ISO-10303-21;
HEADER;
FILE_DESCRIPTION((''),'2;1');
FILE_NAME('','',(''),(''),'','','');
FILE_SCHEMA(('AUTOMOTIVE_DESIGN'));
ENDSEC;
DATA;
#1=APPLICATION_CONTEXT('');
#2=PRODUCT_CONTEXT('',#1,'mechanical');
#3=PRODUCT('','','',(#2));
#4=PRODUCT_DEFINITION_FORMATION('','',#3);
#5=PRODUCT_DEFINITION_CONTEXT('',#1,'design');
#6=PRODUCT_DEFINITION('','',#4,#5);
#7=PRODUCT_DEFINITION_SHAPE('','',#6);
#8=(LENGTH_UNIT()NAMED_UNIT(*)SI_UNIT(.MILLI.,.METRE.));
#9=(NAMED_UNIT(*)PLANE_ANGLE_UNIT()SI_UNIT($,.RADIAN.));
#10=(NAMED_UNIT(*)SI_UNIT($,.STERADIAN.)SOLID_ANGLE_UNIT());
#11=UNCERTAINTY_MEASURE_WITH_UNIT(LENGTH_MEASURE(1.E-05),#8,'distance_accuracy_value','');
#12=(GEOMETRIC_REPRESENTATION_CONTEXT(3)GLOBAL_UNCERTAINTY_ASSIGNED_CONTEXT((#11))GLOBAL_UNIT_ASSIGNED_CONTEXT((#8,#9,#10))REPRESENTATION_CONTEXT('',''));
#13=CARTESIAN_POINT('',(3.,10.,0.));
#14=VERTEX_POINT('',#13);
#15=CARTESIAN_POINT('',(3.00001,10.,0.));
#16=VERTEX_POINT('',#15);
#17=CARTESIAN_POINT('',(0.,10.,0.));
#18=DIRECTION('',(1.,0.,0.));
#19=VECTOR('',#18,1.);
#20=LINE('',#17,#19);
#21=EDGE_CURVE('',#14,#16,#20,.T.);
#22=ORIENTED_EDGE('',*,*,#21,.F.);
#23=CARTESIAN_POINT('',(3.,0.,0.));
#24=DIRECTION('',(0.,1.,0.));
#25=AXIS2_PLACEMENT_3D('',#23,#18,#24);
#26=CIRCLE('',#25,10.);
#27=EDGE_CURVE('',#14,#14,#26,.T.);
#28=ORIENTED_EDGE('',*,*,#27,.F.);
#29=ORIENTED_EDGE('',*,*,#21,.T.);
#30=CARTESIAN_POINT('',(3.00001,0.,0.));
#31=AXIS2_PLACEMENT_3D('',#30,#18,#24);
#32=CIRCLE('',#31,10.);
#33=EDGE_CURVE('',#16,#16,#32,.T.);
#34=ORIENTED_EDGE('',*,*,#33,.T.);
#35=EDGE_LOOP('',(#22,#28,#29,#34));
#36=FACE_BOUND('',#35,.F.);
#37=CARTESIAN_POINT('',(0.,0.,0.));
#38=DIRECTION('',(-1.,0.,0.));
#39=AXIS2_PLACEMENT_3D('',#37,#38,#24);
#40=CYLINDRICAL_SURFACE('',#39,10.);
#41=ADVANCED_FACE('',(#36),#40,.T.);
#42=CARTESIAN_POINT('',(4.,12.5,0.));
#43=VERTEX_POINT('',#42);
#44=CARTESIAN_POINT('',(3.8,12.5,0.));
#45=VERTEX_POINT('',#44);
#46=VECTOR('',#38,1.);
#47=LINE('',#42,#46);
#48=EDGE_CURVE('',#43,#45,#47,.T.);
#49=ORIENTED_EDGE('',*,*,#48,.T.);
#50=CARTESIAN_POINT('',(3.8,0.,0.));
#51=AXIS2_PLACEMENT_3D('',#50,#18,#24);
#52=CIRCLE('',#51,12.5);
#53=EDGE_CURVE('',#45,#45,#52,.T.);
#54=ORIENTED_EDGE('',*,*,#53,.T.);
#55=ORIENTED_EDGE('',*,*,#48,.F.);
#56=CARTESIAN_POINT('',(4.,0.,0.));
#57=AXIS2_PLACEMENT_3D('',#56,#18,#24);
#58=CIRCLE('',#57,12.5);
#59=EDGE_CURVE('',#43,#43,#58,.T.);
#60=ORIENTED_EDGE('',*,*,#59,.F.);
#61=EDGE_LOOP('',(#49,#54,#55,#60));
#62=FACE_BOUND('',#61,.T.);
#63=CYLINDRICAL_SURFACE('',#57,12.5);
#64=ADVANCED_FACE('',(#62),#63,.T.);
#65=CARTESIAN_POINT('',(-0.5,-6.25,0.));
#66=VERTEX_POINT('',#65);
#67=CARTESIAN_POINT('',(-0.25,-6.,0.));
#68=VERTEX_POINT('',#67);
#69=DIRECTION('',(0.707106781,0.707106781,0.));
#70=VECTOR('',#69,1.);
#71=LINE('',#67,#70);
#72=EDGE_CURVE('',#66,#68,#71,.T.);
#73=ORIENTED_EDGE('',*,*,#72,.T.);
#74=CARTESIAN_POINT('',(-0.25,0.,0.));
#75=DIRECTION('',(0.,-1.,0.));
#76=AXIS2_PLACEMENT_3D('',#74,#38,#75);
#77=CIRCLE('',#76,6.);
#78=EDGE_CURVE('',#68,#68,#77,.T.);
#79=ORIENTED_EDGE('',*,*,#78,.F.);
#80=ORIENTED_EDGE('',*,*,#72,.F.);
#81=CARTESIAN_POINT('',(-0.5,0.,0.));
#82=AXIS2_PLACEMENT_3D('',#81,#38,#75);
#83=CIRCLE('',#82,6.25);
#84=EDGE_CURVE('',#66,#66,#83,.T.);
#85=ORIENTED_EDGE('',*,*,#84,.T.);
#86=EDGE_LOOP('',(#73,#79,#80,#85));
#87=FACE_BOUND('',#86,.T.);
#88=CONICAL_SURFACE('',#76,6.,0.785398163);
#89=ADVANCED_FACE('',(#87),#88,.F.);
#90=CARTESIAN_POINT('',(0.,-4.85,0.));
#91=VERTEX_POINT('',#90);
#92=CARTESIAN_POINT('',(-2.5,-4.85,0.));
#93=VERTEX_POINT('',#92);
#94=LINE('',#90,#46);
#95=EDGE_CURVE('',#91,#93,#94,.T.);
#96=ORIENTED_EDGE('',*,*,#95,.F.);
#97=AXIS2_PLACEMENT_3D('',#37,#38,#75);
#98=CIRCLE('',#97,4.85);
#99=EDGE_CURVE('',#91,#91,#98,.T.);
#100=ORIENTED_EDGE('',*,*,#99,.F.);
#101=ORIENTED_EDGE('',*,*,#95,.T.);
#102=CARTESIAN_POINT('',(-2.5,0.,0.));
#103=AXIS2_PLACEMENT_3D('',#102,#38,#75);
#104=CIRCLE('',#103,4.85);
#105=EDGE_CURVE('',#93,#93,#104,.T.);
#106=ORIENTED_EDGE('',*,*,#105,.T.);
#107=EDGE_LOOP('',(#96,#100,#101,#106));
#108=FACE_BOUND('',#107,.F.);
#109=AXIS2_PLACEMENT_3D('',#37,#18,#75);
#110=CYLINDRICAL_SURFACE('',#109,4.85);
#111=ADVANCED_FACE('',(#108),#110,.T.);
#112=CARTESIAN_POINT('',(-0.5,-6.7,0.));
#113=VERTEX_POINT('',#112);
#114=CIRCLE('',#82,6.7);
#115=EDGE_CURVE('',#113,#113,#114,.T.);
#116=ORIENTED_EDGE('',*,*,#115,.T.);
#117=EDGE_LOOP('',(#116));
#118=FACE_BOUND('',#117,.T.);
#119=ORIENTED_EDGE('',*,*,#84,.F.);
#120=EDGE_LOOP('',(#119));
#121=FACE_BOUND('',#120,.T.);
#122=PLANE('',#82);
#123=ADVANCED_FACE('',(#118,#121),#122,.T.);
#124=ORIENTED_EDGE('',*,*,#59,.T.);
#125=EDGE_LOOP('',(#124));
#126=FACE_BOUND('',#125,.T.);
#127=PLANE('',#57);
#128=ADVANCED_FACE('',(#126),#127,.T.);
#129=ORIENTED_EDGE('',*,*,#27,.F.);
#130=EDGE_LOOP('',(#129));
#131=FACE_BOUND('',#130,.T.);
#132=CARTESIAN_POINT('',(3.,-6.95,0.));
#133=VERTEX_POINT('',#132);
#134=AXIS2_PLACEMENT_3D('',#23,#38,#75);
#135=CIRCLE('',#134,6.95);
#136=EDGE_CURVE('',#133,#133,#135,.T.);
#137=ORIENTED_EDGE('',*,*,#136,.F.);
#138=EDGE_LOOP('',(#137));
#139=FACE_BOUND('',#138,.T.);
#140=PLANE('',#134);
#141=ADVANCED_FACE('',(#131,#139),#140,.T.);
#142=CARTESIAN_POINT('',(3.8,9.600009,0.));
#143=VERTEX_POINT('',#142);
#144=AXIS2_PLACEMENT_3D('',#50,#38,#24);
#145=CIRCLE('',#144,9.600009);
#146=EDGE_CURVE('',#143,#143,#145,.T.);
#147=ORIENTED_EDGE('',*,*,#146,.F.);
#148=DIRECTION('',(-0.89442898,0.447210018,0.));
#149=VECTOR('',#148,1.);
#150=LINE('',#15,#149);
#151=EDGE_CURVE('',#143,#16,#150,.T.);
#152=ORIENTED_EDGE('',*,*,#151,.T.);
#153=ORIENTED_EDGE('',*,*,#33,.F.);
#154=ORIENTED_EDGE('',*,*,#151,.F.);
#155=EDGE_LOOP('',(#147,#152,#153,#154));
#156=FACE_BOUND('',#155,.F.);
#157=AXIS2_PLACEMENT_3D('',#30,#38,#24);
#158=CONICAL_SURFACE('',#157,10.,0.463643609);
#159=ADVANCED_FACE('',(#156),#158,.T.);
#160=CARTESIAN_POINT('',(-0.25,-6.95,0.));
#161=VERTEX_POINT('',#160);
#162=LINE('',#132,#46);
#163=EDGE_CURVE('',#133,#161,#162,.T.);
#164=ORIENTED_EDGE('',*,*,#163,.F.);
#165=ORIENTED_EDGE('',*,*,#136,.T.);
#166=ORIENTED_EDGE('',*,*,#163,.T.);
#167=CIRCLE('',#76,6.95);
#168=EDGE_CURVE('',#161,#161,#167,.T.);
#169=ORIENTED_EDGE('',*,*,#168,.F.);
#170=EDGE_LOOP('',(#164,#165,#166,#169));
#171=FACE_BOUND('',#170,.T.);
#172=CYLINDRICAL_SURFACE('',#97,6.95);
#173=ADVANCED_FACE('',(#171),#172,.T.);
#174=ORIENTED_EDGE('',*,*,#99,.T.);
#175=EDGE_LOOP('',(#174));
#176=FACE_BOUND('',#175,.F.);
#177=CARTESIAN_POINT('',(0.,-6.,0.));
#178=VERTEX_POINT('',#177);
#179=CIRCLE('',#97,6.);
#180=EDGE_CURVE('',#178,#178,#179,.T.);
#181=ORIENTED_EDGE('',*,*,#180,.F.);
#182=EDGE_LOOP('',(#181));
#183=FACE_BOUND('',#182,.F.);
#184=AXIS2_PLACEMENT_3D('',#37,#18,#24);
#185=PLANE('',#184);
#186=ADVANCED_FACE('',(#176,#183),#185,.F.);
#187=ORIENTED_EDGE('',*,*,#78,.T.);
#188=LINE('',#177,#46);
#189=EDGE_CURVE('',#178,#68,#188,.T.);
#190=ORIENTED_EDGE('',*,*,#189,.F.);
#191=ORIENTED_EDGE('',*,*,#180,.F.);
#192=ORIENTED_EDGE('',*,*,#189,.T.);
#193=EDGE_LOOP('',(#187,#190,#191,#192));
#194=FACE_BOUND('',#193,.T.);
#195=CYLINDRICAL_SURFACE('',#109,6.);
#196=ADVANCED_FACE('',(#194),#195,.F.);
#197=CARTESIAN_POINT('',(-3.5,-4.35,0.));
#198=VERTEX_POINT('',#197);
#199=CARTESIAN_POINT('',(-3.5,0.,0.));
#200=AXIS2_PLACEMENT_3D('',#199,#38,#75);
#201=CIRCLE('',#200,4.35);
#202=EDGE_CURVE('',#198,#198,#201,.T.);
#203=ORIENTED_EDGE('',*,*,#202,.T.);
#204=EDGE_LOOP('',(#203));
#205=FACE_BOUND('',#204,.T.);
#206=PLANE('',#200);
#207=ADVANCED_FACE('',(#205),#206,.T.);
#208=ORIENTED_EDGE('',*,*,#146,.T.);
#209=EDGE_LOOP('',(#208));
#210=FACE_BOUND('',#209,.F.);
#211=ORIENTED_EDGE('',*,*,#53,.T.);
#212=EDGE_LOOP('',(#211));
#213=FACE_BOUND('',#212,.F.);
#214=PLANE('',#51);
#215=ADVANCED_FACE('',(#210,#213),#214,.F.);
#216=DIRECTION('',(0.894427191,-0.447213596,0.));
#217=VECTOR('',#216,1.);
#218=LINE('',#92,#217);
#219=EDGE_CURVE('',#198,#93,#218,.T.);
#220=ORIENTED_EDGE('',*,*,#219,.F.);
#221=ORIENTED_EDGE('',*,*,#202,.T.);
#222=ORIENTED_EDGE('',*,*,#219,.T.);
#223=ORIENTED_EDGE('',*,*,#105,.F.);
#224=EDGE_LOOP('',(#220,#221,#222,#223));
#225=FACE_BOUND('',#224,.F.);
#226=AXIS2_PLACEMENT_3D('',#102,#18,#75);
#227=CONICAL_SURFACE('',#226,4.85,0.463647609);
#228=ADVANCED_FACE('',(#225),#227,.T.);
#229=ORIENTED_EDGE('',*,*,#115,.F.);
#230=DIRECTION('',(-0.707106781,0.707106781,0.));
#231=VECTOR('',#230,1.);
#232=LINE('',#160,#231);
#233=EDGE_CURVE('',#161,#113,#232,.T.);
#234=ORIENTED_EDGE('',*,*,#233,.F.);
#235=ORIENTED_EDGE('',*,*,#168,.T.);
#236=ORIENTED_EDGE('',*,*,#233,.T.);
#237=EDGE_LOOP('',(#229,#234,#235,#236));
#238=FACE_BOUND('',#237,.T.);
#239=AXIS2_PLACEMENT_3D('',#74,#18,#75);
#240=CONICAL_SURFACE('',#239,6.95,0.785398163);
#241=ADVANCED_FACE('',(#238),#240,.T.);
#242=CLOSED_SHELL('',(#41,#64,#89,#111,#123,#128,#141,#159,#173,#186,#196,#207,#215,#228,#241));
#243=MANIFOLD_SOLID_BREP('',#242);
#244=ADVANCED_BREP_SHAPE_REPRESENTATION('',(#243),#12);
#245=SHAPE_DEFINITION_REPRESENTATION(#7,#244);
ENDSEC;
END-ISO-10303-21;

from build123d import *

# Parameters (mm, degrees)
F0_R       = 10
F1_DEPTH   = 4
F2_R       = 4.85
F3_DEPTH   = 3.5
F4_R       = 6.95
F4_R_2     = 6
F5_DEPTH   = 0.5
F6_R       = 10
F6_R_2     = 6.95
F7_DEPTH   = 3
F8_SIZE    = 0.25
F9_SIZE2   = 0.99999
F9_SIZE    = 0.49999
F9_2_SIZE2 = 1
F9_2_SIZE  = 0.5
F10_R      = 12.5
F10_R_2    = 9.5
F11_DEPTH  = 0.2


# Not quite as in the source:
# - a fillet or chamfer is up to 0.001 mm smaller than in the source, because OpenCascade refuses the exact size


with BuildPart() as f1:
    # F0 (on Right) → F1 (new body)
    with BuildSketch(Plane.YZ):
        Circle(F0_R)
    extrude(amount=F1_DEPTH)

    # F2 (on face) → F3 (join)
    with BuildSketch(Plane(origin=(0, 0, 0), x_dir=(0, -1, 0), z_dir=(-1, 0, 0))):
        Circle(F2_R)
    extrude(amount=F3_DEPTH)

    # F4 (on face) → F5 (join)
    with BuildSketch(Plane(origin=(0, 0, 0), x_dir=(0, -1, 0), z_dir=(-1, 0, 0))):
        Circle(F4_R)
        Circle(F4_R_2, mode=Mode.SUBTRACT)
    extrude(amount=F5_DEPTH)

    # F6 (on face) → F7 (cut)
    with BuildSketch(Plane(origin=(0, 0, 0), x_dir=(0, -1, 0), z_dir=(-1, 0, 0))):
        Circle(F6_R)
        Circle(F6_R_2, mode=Mode.SUBTRACT)
    extrude(amount=-F7_DEPTH, mode=Mode.SUBTRACT)

    # F8
    f8_edges = [f1.edges().sort_by_distance(p)[0] for p in [
        (-0.5, 6.95, 0),
        (-0.5, 6, 0),
    ]]
    chamfer(f8_edges, length=F8_SIZE)

    # F9 (size 0.5 and 1 in the source; OpenCascade refuses exactly that, so slightly less here)
    f9_edges = [f1.edges().sort_by_distance(p)[0] for p in [
        (4, -10, 0),
    ]]
    f9_side = f1.faces().sort_by_distance((4, 0, 0))[0]
    chamfer(f9_edges, length=F9_SIZE, length2=F9_SIZE2, reference=f9_side)

    # F9#2
    f9_2_edges = [f1.edges().sort_by_distance(p)[0] for p in [
        (-3.5, 4.85, 0),
    ]]
    f9_2_side = f1.faces().sort_by_distance((-3.5, 0, 0))[0]
    chamfer(f9_2_edges, length=F9_2_SIZE, length2=F9_2_SIZE2, reference=f9_2_side)

    # F10 (on face) → F11 (join)
    with BuildSketch(Plane.YZ.offset(4)):
        Circle(F10_R)
        Circle(F10_R_2, mode=Mode.SUBTRACT)
    extrude(amount=-F11_DEPTH)


solid = f1.part
